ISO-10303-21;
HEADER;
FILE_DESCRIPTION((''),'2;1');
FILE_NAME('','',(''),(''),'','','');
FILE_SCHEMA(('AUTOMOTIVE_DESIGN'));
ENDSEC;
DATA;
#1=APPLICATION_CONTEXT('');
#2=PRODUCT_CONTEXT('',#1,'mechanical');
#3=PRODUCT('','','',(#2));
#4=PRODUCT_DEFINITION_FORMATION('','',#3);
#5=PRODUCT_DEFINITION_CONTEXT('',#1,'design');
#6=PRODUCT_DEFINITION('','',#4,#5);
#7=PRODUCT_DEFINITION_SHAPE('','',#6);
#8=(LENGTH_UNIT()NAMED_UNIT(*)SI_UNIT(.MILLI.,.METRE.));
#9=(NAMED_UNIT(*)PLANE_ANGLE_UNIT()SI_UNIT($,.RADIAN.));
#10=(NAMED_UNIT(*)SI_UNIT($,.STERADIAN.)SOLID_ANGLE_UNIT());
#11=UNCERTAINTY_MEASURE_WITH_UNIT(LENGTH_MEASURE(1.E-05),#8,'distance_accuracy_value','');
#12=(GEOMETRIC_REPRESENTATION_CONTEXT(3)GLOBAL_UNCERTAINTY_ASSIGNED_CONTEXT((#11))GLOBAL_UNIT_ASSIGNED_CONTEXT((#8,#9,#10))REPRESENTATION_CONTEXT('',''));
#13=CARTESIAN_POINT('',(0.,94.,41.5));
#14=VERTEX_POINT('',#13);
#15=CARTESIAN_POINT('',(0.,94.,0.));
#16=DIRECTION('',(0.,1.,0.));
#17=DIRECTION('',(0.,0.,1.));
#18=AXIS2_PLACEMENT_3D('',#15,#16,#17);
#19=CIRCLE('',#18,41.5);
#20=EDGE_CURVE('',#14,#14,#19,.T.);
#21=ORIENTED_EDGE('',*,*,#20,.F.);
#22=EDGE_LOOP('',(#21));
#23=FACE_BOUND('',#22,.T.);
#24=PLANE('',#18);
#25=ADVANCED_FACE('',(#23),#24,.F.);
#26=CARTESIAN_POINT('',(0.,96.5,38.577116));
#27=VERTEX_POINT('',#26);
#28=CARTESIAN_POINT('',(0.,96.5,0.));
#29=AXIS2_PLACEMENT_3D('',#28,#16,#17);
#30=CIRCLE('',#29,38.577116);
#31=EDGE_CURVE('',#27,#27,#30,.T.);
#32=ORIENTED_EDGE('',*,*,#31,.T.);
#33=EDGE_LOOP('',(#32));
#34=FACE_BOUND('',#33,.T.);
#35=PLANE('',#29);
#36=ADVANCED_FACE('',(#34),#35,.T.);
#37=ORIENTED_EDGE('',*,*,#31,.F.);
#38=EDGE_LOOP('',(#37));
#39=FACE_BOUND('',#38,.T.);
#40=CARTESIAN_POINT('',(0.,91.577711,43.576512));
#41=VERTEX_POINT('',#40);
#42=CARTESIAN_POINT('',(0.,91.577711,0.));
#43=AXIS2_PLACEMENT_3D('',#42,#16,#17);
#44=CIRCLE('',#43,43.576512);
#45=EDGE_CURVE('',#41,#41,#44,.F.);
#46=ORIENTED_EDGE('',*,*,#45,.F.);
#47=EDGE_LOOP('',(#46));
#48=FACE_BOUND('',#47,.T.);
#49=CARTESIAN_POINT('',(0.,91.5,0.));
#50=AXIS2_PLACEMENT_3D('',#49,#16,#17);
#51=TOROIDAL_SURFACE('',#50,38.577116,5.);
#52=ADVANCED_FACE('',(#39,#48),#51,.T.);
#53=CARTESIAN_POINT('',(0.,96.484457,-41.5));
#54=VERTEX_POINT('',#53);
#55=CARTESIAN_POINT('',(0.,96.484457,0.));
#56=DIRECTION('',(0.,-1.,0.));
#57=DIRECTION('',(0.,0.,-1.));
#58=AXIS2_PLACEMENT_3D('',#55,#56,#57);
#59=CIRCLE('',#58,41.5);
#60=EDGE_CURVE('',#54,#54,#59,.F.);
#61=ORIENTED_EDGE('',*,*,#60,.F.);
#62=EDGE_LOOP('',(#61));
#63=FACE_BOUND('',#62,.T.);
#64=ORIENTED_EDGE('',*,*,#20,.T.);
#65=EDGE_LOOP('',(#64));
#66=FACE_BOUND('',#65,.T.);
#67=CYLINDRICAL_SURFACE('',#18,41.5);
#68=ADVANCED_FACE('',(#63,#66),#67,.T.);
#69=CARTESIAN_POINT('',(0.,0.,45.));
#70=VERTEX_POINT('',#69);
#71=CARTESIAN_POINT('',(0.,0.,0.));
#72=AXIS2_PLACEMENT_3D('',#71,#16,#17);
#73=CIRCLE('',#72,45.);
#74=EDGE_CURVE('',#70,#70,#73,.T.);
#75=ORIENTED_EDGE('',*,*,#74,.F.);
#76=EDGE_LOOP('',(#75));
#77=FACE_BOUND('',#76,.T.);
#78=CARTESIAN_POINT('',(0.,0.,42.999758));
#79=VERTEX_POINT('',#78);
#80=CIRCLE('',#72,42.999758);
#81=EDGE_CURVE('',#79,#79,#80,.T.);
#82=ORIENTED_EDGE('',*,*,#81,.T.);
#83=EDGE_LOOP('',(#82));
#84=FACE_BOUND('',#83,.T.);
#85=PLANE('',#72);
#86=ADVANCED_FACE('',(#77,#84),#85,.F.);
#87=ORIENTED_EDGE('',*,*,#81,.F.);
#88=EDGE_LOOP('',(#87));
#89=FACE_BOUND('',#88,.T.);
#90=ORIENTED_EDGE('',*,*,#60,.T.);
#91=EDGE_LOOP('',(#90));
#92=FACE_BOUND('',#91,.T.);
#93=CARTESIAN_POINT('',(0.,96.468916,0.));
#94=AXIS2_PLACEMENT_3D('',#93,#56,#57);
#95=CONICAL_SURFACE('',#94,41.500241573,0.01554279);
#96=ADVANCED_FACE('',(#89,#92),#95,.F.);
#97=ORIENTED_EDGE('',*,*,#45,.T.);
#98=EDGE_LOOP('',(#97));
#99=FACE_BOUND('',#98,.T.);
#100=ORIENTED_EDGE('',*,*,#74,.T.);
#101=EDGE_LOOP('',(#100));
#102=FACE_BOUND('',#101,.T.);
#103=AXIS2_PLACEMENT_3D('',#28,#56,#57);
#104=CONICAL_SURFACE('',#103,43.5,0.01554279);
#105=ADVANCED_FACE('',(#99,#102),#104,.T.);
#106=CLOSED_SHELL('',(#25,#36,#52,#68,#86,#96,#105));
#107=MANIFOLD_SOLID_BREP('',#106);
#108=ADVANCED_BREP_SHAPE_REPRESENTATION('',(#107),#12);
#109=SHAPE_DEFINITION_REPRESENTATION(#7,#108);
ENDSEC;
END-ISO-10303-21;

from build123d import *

# Parameters (mm, degrees)
SKETCH3_R           = 41.5
BOSS_EXTRUDE1_DEPTH = 2.5
FILLET1_R           = 5


# Read off the part's stored shape, not the designer's step: Loft-Thin1
with BuildPart() as part:
    # Loft-Thin1 outline → Loft-Thin1 (revolve)
    with BuildSketch(Plane.XY):
        Polygon((43.5, 96.5), (41.499758397, 96.5), (42.999758397, 0), (45, 0), align=None)
    revolve(axis=Axis((0, 0, 0), (0, 1, 0)))

    # Sketch3 → Boss-Extrude1 (add)
    with BuildSketch(Plane(origin=(0, 96.5, 0), x_dir=(1, 0, 0), z_dir=(0, 1, 0))):
        with Locations(Location((0, 0, 0), (0, 0, 270))):
            Circle(SKETCH3_R)
    extrude(amount=-BOSS_EXTRUDE1_DEPTH)

    # Fillet1
    fillet1_edges = [part.edges().sort_by_distance(p)[0] for p in [
        (-43.5, 96.5, 0),
    ]]
    fillet(fillet1_edges, radius=FILLET1_R)


solid = part.part
